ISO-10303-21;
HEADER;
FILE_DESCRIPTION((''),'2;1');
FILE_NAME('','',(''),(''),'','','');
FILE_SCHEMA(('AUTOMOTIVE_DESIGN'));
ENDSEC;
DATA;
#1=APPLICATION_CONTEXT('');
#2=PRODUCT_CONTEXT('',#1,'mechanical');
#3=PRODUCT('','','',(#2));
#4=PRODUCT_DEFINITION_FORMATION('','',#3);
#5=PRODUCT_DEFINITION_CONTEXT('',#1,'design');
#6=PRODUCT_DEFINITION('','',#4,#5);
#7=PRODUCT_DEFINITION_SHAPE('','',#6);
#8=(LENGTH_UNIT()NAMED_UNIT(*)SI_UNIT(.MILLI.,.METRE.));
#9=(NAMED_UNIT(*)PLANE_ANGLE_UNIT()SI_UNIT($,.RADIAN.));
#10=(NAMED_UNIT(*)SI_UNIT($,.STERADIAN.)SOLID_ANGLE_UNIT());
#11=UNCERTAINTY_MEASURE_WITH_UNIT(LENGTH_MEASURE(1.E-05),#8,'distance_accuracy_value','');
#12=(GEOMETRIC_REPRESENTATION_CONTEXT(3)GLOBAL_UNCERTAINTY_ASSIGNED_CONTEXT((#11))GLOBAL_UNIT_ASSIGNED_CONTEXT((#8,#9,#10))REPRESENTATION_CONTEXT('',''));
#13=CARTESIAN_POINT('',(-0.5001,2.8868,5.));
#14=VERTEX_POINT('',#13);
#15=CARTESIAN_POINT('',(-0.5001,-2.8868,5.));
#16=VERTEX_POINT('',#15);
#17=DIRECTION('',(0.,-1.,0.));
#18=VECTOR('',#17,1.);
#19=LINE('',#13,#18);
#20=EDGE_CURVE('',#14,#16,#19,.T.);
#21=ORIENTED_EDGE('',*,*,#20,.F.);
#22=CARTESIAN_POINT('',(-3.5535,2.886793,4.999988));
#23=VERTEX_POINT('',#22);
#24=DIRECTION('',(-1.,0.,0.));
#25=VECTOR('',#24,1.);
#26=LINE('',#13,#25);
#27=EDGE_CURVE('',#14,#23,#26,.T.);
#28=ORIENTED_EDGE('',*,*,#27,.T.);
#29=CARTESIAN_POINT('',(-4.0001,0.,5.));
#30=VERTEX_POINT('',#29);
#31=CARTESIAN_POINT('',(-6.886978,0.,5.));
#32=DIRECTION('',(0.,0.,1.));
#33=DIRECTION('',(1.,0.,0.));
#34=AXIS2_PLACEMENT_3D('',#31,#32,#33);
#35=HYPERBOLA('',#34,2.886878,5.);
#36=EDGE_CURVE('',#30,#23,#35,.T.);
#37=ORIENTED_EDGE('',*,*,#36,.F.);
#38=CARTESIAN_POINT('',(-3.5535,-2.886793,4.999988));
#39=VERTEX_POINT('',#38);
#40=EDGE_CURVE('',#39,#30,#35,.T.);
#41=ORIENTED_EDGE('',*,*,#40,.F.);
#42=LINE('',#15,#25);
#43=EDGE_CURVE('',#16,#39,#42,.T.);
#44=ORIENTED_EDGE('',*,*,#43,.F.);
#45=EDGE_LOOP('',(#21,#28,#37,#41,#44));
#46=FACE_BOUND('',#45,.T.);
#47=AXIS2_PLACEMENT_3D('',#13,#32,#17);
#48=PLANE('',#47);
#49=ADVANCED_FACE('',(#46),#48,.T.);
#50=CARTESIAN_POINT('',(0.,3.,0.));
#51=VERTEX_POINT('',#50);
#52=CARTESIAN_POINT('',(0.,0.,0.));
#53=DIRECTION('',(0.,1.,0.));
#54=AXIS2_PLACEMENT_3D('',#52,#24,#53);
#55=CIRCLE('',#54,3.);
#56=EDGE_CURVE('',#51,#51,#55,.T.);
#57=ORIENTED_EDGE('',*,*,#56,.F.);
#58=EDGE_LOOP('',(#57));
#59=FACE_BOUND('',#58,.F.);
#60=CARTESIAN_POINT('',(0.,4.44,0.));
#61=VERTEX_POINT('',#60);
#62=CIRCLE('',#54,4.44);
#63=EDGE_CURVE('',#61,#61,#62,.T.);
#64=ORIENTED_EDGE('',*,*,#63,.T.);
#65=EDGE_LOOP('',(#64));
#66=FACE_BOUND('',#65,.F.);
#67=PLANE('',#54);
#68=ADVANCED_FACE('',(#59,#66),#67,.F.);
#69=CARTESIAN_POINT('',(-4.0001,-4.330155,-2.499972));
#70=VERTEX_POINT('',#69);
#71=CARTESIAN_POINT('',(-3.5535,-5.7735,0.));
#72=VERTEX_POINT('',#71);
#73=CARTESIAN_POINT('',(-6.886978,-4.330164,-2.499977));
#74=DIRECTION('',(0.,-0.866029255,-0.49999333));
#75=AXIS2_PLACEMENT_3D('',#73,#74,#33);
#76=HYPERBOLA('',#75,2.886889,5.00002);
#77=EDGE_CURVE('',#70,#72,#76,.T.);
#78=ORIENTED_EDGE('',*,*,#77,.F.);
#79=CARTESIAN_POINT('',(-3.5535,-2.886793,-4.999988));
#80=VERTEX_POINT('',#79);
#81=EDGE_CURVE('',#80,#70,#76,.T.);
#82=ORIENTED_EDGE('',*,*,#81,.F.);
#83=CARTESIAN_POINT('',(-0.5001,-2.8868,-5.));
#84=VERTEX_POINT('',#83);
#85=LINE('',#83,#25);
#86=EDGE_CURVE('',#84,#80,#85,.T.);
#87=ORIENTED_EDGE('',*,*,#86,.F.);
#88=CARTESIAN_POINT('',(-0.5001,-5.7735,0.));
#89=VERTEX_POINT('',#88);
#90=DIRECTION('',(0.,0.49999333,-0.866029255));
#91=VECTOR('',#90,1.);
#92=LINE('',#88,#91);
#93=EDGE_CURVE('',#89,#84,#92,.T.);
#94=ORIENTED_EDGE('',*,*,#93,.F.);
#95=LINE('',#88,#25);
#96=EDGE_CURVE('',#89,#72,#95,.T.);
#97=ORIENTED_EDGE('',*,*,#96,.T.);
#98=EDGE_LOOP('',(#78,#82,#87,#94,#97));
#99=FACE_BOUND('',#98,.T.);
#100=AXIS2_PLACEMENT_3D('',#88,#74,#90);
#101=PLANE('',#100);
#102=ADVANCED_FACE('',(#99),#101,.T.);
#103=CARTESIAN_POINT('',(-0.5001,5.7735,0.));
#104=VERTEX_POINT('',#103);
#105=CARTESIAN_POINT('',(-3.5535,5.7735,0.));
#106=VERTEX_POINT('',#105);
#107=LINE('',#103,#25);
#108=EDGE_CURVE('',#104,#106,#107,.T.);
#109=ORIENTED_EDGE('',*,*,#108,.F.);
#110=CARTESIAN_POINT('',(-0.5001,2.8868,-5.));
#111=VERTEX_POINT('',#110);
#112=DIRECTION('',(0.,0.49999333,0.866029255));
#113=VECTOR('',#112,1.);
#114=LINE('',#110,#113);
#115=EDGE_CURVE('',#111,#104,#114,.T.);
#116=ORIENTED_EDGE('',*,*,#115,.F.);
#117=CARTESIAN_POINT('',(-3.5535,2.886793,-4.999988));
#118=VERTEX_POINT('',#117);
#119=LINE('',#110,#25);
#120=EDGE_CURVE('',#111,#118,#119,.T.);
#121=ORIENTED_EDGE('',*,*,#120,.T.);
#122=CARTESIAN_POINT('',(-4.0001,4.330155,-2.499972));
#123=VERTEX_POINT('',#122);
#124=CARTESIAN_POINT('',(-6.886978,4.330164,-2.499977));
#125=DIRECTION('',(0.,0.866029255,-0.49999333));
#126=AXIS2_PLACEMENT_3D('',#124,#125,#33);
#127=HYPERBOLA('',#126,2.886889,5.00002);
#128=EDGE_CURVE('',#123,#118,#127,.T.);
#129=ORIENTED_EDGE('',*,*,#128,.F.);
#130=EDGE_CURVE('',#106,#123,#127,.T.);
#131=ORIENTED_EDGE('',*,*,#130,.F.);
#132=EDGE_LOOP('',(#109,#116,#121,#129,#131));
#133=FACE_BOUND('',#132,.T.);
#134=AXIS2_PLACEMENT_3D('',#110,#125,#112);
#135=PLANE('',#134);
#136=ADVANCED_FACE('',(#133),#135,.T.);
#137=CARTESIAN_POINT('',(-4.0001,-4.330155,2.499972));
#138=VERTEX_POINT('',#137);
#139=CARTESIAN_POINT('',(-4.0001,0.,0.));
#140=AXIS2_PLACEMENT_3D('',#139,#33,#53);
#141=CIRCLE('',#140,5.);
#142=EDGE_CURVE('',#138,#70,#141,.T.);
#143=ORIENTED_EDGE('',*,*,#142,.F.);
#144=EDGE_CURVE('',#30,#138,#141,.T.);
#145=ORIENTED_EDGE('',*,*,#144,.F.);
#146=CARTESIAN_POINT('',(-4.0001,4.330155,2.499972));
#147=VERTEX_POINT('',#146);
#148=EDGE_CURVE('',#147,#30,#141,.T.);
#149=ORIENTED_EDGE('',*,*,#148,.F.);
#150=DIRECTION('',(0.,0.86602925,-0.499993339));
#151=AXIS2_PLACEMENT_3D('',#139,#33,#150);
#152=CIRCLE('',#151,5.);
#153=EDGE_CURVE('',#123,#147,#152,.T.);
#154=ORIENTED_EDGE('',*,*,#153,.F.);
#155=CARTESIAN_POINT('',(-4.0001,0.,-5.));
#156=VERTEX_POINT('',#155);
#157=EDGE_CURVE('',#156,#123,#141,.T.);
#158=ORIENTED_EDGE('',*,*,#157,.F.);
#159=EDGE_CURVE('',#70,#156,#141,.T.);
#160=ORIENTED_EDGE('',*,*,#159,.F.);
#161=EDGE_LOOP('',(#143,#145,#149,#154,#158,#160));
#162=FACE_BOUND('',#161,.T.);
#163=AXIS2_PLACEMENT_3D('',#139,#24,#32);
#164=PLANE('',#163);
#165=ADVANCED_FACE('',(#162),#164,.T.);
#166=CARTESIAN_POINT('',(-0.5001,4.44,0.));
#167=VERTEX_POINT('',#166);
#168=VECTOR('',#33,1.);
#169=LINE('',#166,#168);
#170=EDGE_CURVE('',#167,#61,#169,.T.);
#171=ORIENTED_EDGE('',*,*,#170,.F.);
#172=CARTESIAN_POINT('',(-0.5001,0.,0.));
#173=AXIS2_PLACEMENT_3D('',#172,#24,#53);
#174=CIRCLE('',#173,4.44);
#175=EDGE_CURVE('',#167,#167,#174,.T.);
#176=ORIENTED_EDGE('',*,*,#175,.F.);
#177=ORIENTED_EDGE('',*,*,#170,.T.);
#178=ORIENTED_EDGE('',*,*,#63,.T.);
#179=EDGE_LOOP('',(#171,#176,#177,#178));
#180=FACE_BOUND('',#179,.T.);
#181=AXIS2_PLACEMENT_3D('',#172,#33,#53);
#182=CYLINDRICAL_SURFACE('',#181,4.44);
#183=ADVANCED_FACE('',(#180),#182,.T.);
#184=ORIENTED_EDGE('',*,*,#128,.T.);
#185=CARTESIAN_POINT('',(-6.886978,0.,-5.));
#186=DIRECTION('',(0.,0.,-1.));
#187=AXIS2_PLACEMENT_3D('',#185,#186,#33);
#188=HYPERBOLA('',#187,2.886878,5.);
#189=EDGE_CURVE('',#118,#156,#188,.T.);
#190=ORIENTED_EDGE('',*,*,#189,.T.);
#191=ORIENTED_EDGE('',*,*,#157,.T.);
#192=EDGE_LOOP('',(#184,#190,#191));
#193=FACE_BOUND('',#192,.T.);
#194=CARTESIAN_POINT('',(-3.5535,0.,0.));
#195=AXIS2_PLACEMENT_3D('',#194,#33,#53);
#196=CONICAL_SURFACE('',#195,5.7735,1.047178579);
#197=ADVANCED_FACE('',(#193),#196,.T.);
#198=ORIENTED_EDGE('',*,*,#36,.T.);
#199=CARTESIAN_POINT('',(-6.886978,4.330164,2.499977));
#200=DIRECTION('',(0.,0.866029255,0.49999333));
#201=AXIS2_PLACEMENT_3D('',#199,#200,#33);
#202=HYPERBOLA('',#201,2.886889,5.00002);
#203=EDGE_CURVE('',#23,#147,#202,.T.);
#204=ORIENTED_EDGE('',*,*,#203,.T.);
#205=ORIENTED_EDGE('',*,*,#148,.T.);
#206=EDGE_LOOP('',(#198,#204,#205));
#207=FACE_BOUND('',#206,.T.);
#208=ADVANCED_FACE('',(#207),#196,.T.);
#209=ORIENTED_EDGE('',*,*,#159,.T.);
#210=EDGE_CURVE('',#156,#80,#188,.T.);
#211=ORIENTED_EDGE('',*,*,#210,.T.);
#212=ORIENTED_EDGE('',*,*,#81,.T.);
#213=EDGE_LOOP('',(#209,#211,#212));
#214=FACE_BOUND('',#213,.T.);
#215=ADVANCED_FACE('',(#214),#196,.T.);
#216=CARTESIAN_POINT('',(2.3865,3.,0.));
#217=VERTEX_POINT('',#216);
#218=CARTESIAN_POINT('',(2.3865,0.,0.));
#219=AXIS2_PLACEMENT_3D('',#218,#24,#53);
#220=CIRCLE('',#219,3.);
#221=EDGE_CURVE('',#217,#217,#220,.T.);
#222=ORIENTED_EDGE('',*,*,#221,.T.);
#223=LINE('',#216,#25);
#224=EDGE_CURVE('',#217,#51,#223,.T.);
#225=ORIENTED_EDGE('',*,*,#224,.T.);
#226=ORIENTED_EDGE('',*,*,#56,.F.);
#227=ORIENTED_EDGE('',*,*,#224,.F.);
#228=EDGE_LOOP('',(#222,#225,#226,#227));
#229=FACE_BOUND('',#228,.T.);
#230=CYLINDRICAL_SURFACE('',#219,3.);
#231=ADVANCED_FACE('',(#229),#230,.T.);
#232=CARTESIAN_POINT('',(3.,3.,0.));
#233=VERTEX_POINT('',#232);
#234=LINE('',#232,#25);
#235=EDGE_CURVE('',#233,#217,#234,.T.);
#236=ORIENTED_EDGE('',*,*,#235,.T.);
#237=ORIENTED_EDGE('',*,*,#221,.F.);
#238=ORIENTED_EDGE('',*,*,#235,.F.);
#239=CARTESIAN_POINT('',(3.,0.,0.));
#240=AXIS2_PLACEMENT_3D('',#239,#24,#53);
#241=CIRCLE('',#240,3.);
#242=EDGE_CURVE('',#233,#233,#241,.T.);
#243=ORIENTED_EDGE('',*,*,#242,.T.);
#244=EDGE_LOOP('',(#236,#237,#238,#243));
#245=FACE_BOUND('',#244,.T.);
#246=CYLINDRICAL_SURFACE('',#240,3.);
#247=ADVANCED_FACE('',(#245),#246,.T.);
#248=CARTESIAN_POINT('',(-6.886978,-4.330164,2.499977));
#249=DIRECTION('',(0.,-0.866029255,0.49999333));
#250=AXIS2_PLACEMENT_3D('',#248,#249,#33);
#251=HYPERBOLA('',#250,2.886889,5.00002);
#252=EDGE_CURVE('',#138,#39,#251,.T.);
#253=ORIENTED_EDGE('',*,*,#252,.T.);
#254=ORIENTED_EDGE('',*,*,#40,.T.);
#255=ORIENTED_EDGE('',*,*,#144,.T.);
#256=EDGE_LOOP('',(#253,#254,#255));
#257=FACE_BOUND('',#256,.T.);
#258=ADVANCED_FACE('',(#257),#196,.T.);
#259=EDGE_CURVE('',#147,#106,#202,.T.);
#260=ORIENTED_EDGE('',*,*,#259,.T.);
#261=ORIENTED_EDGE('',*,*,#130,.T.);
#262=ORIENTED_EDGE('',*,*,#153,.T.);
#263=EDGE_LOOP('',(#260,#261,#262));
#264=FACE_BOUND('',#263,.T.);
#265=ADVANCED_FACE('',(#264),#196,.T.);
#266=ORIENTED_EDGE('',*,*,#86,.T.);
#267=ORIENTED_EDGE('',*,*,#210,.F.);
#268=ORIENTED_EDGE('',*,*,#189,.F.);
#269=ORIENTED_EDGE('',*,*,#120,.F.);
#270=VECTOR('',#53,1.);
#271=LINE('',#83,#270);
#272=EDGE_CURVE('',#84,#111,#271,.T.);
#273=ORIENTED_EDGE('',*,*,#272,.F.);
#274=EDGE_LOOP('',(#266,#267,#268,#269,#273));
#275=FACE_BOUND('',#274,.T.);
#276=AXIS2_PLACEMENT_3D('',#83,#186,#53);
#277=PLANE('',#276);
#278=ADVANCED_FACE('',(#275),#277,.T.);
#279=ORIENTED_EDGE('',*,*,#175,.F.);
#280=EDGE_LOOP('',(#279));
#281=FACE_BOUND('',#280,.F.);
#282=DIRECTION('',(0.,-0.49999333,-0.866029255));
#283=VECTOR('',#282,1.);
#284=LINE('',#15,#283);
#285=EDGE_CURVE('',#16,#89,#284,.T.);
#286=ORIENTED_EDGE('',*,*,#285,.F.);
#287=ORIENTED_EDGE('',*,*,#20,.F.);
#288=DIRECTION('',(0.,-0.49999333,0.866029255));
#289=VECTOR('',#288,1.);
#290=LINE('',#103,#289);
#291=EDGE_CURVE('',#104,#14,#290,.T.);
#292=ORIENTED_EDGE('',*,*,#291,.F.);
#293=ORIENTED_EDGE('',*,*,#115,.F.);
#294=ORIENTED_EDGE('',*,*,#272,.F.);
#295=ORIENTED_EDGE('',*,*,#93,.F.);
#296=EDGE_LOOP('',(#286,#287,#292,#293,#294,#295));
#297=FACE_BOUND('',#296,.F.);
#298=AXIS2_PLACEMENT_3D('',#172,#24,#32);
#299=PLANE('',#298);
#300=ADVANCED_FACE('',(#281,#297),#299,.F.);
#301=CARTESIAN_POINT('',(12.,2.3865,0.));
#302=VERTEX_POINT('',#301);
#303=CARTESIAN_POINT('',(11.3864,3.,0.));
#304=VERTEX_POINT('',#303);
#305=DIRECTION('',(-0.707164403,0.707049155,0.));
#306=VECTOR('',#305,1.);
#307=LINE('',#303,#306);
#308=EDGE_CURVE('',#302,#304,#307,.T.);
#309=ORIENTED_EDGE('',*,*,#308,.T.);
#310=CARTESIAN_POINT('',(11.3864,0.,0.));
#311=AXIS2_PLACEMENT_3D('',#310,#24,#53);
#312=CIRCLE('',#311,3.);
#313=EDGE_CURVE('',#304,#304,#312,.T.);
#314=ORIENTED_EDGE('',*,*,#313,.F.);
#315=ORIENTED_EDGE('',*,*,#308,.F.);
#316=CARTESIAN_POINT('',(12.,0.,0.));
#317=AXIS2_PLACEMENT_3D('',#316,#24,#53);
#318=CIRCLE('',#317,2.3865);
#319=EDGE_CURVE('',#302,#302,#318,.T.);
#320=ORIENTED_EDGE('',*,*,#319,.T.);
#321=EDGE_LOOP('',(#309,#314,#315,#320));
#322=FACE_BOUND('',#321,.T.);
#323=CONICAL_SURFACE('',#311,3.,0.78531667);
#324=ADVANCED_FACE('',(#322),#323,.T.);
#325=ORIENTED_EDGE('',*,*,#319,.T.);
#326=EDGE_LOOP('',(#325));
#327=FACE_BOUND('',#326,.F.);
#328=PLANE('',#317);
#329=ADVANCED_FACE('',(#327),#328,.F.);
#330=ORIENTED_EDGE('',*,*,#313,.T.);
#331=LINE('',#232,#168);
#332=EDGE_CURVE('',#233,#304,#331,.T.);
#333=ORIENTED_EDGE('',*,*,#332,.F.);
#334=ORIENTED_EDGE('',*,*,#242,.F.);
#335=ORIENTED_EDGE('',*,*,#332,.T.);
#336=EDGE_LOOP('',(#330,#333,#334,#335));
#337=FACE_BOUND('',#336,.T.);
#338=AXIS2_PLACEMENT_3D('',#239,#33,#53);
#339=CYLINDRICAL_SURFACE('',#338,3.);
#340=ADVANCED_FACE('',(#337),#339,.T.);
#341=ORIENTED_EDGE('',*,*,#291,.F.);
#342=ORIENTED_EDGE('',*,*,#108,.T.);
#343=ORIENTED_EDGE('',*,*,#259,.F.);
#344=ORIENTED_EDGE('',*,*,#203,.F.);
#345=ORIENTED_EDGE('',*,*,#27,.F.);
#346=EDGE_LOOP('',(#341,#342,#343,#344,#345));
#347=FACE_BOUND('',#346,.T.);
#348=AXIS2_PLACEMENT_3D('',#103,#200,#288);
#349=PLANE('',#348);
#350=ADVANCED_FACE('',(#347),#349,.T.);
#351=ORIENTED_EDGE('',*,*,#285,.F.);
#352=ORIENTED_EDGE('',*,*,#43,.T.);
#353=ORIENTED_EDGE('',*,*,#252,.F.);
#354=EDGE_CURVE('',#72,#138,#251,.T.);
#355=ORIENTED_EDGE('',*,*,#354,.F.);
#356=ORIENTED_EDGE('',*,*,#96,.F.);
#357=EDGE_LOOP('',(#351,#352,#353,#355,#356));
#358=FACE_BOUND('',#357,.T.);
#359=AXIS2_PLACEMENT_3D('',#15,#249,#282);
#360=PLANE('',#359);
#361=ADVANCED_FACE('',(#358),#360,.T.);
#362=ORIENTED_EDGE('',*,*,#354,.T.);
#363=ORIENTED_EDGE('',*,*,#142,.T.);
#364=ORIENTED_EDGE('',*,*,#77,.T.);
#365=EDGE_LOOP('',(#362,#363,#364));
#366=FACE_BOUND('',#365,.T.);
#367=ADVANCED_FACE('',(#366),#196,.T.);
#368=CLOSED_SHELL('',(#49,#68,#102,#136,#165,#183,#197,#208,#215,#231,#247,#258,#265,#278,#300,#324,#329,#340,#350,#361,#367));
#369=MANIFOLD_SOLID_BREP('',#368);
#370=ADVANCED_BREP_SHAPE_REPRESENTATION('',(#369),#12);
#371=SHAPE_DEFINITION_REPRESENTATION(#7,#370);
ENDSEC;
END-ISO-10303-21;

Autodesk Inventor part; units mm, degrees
ref_plane "YZ Plane" through (0, 0, 0) normal (1, 0, 0) x (0, 1, 0)
ref_plane "XZ Plane" through (0, 0, 0) normal (0, 1, 0) x (-1, 0, 0)
sketch "Skizze1" plane through (0, 0, 0) normal (0, 0, 1) x (1, 0, 0)
  line L0 (0, 4.44) -> (0, 3)
  line L1 (3, 3) -> (12, 3)
  line L2 (12, 3) -> (12, 0)
  line L3 (12, 0) -> (-0.5001, 0)
  line L4 (-3.0001, 0) -> (14.5, 0) projected
  line L5 (-0.5001, 0) -> (-0.5001, 4.44)
  line L6 (-0.5001, 4.44) -> (0, 4.44)
  line L7 (3, 3) -> (2.3865, 3)
  line L8 (2.3865, 3) -> (0, 3)
  line L9 (0, -0.888) -> (0, 5.328) projected
  dimension "d0" = 12
  dimension "d1" = 9
  dimension "d2" = 6
  dimension "d9" = 0.5001
  dimension "d10" = 8.88
  dimension "d13" = 0.6136
  dimension "d14" = 6
revolve "Körper" add sketch "Skizze1" angle 360 about axis through (12, 0, 0) along (-1, 0, 0)
sketch "Skizze2" plane through (-0.5001, 0, 0) normal (-1, 0, 0) x (0, 0, 1)
  line L0 (0, 5.7735) -> (5, 2.8868)
  line L1 (5, 2.8868) -> (5, -2.8868)
  line L2 (5, -2.8868) -> (0, -5.7735)
  line L3 (0, -5.7735) -> (-5, -2.8868)
  line L4 (-5, -2.8868) -> (-5, 2.8868)
  line L5 (-5, 2.8868) -> (0, 5.7735)
  point P0 (0, 0)
  point P1 (0, 0)
  dimension "d11" = 10
extrude "Kopf" add sketch "Skizze2" along normal blind 3.5
sketch "Skizze4" plane through (0, 0, 0) normal (0, 0, 1) x (1, 0, 0)
  line L0 (-4.0001, 5) -> (-4.0001, 5.7735)
  line L1 (-4.0001, 5.7735) -> (-3.5535, 5.7735)
  line L2 (-3.5535, 5.7735) -> (-4.0001, 5)
  line L3 (-4.7001, 0) -> (0.1999, 0) projected
  line L4 (-0.5001, 5.7735) -> (-4.0001, 5.7735) projected
  line L5 (-4.0001, 2.8868) -> (-4.0001, 5.7735) projected
  dimension "d5" = 30
  dimension "d19" = 10
revolve "Fase1" cut sketch "Skizze4" angle 360 about axis through (-10, 0, 0) along (1, 0, 0)
thread "Gewinde" size "M6x1" class "6g" standard "ISO Metric profile" length 9
chamfer "Fase2" distance 0.6135 distance2 0.6136 1 edges at (12, -3, 0) measured on face at (12, -0.5681, 0.823)
ref_plane "Work Plane1" through (1.525, 0, 0) normal (0, 0, 1) x (1, 0, 0)
equation "\"d0\" = NLG"
equation "\"d1\" = GEL"
equation "\"d2\" = GD"
equation "\"d10\" = SD2"
equation "\"d14\" = BDM"
equation "\"d11\" = SW"
equation "\"d3\" = KOH - SD"
equation "\"d5\" = ANG1"
equation "\"d19\" = SW0"
equation "\"d15\" = GEL"
equation "\"d6\" = -0.5 * SPD + 0.5 * GD"
equation "\"NLG\" = 12"
equation "\"GD\" = NND"
equation "\"BDM\" = NND"
equation "\"KOH\" = 4"
equation "\"GEL\" = 9"
equation "\"SW\" = 10"
equation "\"SW0\" = SW"
equation "\"SPD\" = NND - 1.2269 * PTC"
equation "\"SD2\" = 8.88"
equation "\"SD\" = 0.5"
equation "\"ANG1\" = 30deg"
equation "\"GAL\" = 0.61345 * PTC"
equation "\"GUL\" = 0.61345 * PTC"
equation "\"RR\" = 0.25"
equation "\"GD1\" = THREADDIA - 1.2269 * PTC"
equation "\"THREADDIA\" = 6"
equation "\"SDH\" = SD2"
equation "\"SDHG\" = 3"
equation "\"TOA\" = 30deg"
equation "\"PTC\" = 1"
equation "\"NND\" = 6"
equation "\"E0\" = 11.55"
properties part number "ISO 4017 - M6 x 12" material "Stahl, weich"
